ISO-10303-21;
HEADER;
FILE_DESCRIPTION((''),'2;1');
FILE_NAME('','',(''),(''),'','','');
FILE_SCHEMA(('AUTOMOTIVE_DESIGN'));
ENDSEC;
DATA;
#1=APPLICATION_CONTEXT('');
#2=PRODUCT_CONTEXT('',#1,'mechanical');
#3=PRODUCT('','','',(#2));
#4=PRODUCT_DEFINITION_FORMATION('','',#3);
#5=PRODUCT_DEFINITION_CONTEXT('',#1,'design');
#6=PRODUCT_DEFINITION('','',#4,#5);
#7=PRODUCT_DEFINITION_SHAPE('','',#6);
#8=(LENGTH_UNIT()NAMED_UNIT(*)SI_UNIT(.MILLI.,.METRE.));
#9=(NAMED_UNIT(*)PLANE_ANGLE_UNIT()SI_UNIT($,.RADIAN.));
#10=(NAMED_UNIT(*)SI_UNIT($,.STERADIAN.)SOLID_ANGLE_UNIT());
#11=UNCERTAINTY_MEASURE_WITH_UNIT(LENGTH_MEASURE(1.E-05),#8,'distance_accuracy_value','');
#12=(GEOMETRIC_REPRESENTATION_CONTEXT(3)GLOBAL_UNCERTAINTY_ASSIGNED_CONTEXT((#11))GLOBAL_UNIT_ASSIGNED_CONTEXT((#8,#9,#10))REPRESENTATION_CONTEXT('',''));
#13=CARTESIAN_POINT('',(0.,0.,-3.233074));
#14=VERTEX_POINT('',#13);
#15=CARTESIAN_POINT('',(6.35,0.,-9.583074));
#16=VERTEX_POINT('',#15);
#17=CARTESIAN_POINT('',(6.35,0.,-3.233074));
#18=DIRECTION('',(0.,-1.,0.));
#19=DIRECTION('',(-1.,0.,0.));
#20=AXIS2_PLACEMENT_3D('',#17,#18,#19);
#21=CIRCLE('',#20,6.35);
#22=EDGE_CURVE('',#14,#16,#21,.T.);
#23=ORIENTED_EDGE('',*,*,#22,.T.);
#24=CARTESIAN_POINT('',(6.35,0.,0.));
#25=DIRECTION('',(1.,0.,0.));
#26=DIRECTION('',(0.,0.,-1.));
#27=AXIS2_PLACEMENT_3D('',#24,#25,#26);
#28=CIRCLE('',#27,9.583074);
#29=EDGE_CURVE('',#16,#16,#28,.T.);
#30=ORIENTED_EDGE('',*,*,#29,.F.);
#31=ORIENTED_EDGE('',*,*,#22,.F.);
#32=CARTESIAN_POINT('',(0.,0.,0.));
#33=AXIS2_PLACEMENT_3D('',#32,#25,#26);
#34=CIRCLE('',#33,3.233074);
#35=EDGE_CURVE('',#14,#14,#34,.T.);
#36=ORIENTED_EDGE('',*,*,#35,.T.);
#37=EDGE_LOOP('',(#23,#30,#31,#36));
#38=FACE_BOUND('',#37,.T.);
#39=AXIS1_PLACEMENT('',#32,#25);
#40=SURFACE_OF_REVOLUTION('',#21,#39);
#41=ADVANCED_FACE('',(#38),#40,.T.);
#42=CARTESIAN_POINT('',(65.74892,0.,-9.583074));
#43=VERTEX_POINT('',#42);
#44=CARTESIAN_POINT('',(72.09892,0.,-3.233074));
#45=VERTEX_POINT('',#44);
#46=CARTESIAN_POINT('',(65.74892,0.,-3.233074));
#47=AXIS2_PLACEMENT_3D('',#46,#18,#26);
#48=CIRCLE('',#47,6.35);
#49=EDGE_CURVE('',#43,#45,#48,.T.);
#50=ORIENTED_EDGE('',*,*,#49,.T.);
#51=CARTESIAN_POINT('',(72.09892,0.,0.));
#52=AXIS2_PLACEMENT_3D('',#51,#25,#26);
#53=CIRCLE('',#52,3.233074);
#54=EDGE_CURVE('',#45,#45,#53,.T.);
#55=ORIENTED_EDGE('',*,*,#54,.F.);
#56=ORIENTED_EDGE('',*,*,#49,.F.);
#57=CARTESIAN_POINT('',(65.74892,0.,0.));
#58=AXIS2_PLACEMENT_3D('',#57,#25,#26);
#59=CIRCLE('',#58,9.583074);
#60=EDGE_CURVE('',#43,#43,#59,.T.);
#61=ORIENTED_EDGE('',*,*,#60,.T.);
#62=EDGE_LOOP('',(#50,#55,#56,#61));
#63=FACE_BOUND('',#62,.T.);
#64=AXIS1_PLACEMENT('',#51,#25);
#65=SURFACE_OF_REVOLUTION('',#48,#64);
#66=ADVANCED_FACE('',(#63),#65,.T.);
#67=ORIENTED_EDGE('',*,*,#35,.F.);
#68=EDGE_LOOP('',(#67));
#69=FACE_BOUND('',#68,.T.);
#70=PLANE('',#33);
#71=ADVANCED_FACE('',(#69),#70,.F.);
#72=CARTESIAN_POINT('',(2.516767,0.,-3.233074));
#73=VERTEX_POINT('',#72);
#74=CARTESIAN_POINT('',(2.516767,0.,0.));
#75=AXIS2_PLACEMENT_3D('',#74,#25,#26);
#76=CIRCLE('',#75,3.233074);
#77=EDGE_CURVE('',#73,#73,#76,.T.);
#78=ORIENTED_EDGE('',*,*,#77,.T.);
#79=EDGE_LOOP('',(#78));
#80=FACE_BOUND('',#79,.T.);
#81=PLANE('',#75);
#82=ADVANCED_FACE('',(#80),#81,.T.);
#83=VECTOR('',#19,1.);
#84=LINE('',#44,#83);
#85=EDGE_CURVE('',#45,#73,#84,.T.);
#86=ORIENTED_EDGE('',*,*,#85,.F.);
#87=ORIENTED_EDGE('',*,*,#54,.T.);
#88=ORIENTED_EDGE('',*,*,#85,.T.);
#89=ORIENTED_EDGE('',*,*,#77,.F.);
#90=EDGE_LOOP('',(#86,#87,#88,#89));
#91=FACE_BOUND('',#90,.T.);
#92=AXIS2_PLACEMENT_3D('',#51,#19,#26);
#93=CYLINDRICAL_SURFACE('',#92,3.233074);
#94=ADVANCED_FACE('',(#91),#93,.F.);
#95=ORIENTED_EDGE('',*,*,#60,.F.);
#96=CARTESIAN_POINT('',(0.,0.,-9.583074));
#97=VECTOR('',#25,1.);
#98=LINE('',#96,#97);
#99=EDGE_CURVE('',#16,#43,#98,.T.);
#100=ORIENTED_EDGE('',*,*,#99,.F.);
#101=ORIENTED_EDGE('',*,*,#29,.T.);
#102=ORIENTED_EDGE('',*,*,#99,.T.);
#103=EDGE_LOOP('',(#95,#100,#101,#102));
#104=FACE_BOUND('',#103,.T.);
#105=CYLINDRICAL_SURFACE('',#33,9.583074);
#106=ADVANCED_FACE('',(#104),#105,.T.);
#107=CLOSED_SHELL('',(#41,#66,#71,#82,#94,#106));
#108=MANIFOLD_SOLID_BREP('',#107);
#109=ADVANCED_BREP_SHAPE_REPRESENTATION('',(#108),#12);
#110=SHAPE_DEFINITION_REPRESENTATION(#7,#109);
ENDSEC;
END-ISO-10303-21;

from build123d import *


# Not quite as in the source:
# - a fillet or chamfer that OpenCascade refuses, or shapes differently, is made with other operations: its cross-section is extruded or revolved along the edge and cut away or added


with BuildPart() as f2:
    # F0 (on Front) → F2 (revolve)
    with BuildSketch(Plane.XZ):
        Polygon((2.5167669653, 0), (0, 0), (0, -9.5830742138), (72.0989203059, -9.5830742138), (72.0989203059, -3.2330742138), (2.5167669653, -3.2330742138), align=None)
    revolve(axis=Axis((32.417844981, 0, 0), (1, 0, 0)))

    # F3: fillet of radius 6.35 on 2 edges, made by hand

    # F3_s1 → F3_t2 (revolve, cut)
    with BuildSketch(Plane.XZ):
        with BuildLine():
            ThreePointArc((0, -3.2330742138), (1.8598719395, -7.7232022744), (6.35, -9.5830742138))
            Line((6.35, -9.5830742138), (0, -9.5830742138))
            Line((0, -9.5830742138), (0, -3.2330742138))
        make_face()
    revolve(axis=Axis((0, 0, 0), (1, 0, 0)), mode=Mode.SUBTRACT)

    # F3_s3 → F3_t4 (revolve, cut)
    with BuildSketch(Plane.XZ):
        with BuildLine():
            ThreePointArc((65.7489203059, -9.5830742138), (70.2390483664, -7.7232022744), (72.0989203059, -3.2330742138))
            Line((72.0989203059, -3.2330742138), (72.0989203059, -9.5830742138))
            Line((72.0989203059, -9.5830742138), (65.7489203059, -9.5830742138))
        make_face()
    revolve(axis=Axis((72.0989203059, 0, 0), (1, 0, 0)), mode=Mode.SUBTRACT)


solid = f2.part
